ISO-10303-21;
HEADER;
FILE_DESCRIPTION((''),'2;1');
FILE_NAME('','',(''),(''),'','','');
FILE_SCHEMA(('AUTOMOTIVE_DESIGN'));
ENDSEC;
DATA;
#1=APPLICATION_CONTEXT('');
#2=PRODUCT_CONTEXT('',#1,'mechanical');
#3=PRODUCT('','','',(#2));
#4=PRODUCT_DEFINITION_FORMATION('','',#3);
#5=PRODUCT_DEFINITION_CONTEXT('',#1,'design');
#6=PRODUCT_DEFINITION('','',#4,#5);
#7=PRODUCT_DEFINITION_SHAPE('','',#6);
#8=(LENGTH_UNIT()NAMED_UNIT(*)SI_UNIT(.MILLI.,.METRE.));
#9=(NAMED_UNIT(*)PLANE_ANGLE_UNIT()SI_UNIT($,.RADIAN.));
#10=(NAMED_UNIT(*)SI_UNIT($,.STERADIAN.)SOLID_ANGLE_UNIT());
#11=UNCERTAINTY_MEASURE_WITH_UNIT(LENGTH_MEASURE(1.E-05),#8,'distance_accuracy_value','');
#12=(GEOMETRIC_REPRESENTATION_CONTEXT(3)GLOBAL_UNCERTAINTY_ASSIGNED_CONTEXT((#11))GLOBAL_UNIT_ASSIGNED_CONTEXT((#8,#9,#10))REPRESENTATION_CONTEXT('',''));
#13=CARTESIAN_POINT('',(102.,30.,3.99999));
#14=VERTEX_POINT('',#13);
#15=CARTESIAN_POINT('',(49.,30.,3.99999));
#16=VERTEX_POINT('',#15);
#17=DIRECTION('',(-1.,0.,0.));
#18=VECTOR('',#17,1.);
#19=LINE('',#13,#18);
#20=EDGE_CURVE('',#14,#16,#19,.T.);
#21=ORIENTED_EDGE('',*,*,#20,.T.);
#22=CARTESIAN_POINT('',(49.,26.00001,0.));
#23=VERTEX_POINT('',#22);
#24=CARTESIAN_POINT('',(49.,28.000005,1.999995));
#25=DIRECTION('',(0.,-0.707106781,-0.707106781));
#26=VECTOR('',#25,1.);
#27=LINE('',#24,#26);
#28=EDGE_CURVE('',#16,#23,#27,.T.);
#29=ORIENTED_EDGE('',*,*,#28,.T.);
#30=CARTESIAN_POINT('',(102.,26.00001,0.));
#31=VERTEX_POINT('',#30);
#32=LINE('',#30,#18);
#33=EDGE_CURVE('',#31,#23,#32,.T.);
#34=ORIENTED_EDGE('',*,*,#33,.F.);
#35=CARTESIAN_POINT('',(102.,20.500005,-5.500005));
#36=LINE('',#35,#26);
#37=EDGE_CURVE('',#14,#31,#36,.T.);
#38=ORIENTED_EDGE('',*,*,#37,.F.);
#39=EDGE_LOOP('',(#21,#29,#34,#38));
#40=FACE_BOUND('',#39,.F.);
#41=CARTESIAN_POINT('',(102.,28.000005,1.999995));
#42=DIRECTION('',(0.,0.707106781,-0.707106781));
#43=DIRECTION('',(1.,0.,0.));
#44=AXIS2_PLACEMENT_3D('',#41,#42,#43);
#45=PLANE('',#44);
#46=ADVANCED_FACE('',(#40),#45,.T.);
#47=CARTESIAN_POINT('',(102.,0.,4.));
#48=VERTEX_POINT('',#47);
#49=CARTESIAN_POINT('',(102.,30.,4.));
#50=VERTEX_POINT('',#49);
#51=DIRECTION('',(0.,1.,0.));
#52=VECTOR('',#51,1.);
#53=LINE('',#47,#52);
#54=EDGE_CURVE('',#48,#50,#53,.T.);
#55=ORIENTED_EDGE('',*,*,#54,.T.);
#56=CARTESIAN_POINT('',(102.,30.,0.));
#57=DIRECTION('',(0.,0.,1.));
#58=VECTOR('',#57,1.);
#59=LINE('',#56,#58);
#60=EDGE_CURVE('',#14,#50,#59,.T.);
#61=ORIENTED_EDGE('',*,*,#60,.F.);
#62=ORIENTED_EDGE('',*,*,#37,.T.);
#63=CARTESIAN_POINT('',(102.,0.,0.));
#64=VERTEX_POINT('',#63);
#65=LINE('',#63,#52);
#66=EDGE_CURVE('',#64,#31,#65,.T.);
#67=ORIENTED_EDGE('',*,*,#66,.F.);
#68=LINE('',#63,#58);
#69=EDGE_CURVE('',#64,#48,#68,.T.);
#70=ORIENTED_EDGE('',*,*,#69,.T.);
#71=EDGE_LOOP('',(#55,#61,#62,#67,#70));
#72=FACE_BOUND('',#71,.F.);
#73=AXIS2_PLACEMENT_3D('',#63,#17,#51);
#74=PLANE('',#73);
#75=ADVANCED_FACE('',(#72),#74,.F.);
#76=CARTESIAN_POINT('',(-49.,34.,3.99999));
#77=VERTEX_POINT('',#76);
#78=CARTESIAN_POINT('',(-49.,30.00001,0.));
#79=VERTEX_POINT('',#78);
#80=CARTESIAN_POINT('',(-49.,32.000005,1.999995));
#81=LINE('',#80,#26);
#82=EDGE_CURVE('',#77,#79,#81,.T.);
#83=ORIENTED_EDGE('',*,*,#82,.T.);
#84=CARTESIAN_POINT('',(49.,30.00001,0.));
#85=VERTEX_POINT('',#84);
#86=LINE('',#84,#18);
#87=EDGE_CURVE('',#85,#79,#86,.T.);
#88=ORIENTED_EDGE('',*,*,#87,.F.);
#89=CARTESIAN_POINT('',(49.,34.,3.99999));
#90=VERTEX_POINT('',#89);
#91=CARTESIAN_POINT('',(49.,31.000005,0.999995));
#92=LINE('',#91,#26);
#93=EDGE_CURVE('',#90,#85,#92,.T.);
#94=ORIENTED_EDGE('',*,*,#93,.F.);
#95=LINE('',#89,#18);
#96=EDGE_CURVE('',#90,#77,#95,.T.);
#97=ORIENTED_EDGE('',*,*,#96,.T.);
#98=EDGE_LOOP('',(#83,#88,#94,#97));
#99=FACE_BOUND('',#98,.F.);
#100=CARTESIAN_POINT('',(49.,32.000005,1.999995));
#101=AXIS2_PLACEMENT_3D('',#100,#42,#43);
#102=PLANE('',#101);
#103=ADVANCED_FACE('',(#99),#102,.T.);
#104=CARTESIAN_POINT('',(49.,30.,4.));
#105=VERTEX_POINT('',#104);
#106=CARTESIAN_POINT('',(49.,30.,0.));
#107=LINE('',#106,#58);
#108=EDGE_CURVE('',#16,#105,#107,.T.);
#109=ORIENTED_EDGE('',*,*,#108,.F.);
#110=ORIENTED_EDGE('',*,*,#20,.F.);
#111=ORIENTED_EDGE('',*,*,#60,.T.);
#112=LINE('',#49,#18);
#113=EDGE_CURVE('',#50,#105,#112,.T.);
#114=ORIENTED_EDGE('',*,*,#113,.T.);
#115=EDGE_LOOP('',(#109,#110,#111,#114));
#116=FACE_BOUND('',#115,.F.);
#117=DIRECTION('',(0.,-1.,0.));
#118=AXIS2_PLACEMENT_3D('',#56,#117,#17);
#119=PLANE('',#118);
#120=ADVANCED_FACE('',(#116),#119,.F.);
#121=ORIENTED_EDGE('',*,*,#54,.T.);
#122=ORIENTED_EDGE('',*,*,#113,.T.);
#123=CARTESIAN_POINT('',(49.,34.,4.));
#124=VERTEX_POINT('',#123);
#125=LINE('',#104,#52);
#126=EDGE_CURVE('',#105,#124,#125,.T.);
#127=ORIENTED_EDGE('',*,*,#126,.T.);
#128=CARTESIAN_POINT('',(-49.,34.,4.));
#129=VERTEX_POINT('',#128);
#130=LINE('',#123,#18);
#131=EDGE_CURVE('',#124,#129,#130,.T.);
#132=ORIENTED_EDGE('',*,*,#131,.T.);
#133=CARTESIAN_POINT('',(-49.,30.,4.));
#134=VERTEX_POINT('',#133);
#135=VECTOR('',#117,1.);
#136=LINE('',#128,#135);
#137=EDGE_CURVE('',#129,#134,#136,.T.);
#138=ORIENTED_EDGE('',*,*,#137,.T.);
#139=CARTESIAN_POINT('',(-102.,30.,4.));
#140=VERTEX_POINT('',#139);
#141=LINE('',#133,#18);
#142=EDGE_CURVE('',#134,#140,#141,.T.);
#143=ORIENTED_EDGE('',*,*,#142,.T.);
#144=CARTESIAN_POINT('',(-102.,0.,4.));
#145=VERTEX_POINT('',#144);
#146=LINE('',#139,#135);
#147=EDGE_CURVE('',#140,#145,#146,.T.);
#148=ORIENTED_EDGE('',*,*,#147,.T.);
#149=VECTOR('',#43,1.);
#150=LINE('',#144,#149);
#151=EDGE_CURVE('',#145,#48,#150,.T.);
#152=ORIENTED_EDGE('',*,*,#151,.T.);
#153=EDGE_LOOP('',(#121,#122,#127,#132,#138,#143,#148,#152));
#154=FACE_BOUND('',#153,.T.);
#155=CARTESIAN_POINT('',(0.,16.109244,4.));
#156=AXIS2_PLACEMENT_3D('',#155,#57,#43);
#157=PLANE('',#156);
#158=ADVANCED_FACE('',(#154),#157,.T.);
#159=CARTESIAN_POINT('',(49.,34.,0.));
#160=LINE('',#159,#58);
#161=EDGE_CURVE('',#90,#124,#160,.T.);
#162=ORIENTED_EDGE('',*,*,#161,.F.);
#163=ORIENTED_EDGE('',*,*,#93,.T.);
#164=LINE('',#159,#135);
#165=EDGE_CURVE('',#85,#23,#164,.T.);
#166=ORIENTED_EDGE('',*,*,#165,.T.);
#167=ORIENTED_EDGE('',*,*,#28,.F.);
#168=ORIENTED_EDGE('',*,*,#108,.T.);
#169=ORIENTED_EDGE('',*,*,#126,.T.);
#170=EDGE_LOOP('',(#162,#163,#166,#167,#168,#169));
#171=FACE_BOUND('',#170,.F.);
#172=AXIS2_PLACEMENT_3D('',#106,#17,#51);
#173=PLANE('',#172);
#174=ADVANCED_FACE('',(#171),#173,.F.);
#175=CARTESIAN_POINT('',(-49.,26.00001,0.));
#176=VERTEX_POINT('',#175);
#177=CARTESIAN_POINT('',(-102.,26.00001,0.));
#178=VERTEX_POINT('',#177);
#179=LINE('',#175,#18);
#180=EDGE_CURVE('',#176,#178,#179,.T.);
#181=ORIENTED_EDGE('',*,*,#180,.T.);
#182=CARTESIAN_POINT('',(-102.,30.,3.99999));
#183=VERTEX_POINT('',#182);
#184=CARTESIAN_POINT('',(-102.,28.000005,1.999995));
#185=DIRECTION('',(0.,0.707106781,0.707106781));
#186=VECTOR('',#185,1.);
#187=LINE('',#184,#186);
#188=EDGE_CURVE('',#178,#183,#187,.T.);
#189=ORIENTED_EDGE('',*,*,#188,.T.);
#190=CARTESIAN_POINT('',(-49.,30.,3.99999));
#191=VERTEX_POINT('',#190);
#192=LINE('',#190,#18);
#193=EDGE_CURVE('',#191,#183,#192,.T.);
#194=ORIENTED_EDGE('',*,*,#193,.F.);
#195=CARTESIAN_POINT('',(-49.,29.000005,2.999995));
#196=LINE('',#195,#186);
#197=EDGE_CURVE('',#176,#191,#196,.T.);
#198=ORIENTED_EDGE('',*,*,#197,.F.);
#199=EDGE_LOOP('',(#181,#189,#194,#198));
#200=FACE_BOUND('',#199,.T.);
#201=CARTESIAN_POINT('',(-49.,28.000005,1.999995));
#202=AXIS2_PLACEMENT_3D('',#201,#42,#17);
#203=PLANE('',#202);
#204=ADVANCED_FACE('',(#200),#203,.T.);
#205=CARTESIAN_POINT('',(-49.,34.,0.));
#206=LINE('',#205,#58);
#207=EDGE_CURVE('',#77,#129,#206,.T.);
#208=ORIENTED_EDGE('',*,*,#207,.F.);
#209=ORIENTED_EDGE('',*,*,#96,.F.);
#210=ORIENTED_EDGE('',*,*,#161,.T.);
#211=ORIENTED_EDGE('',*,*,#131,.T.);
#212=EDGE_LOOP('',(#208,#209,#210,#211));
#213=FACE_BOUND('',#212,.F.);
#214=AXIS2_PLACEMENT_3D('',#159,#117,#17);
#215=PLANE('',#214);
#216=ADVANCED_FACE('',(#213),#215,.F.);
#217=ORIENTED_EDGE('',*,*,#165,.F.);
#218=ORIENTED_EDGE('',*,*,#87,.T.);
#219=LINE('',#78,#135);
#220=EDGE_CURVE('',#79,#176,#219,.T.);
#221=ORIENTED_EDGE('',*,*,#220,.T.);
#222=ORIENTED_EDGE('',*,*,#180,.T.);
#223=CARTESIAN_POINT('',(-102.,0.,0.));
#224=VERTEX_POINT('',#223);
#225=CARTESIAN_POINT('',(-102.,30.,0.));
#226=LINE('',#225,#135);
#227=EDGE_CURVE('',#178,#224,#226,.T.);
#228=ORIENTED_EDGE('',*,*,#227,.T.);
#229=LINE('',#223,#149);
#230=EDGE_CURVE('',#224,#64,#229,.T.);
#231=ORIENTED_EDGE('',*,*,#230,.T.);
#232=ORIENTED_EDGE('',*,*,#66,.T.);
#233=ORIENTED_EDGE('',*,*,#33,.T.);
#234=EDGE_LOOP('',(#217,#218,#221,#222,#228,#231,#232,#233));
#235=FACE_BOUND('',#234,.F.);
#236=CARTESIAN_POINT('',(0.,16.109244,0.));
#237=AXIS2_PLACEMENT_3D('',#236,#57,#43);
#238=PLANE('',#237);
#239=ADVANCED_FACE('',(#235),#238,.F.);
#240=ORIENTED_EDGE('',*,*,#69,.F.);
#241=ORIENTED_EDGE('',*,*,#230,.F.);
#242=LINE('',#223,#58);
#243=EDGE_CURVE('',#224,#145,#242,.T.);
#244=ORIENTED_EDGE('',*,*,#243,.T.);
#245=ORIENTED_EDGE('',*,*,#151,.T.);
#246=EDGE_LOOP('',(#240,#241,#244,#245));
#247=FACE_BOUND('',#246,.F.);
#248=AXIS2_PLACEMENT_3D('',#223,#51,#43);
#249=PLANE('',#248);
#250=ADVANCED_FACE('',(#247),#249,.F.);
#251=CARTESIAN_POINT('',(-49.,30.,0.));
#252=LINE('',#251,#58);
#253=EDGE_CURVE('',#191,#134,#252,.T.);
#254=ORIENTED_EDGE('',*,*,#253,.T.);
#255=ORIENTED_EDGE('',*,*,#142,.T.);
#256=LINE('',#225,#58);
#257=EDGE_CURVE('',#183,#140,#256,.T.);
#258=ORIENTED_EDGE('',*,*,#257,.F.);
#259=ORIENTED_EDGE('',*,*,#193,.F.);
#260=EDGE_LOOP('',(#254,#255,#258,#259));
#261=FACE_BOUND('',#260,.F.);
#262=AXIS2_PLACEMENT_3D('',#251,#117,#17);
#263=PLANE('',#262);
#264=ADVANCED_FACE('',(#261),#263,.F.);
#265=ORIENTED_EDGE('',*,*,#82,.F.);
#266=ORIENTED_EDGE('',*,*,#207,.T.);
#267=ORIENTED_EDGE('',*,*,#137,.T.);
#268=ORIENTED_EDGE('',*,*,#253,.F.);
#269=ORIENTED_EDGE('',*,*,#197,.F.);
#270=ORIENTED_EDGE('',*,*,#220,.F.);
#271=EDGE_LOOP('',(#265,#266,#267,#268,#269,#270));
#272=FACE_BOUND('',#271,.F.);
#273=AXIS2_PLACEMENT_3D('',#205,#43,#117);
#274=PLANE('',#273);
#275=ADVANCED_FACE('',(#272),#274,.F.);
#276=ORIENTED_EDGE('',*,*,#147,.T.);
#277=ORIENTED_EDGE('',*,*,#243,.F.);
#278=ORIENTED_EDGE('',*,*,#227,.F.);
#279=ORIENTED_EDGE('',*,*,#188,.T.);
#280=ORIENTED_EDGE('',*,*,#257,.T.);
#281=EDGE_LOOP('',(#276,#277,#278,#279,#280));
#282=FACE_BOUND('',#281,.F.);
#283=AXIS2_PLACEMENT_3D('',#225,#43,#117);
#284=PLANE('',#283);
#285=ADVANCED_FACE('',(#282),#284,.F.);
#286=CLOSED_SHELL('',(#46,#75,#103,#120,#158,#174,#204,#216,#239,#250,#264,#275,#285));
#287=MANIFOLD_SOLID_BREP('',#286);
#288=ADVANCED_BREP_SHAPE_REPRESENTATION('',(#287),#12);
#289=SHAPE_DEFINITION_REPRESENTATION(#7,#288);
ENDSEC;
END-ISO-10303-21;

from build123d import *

# Parameters (mm, degrees)
F1_DEPTH = 4
F2_SIZE  = 3.99999
F3_SIZE  = 3.99999
F4_SIZE  = 3.99999


# Not quite as in the source:
# - a fillet or chamfer is up to 0.001 mm smaller than in the source, because OpenCascade refuses the exact size


with BuildPart() as f1:
    # F0 (on Top) → F1 (new body)
    with BuildSketch(Plane.XY):
        Polygon((-102, 0), (0, 0), (102, 0), (102, 30), (49, 30), (49, 34), (-49, 34), (-49, 30), (-102, 30), align=None)
    extrude(amount=F1_DEPTH)

    # F2 (size 4 in the source; OpenCascade refuses exactly that, so slightly less here)
    f2_edges = [f1.edges().sort_by_distance(p)[0] for p in [
        (75.5, 30, 0),
    ]]
    chamfer(f2_edges, length=F2_SIZE)

    # F3 (size 4 in the source; OpenCascade refuses exactly that, so slightly less here)
    f3_edges = [f1.edges().sort_by_distance(p)[0] for p in [
        (0, 34, 0),
    ]]
    chamfer(f3_edges, length=F3_SIZE)

    # F4 (size 4 in the source; OpenCascade refuses exactly that, so slightly less here)
    f4_edges = [f1.edges().sort_by_distance(p)[0] for p in [
        (-75.5, 30, 0),
    ]]
    chamfer(f4_edges, length=F4_SIZE)


solid = f1.part
